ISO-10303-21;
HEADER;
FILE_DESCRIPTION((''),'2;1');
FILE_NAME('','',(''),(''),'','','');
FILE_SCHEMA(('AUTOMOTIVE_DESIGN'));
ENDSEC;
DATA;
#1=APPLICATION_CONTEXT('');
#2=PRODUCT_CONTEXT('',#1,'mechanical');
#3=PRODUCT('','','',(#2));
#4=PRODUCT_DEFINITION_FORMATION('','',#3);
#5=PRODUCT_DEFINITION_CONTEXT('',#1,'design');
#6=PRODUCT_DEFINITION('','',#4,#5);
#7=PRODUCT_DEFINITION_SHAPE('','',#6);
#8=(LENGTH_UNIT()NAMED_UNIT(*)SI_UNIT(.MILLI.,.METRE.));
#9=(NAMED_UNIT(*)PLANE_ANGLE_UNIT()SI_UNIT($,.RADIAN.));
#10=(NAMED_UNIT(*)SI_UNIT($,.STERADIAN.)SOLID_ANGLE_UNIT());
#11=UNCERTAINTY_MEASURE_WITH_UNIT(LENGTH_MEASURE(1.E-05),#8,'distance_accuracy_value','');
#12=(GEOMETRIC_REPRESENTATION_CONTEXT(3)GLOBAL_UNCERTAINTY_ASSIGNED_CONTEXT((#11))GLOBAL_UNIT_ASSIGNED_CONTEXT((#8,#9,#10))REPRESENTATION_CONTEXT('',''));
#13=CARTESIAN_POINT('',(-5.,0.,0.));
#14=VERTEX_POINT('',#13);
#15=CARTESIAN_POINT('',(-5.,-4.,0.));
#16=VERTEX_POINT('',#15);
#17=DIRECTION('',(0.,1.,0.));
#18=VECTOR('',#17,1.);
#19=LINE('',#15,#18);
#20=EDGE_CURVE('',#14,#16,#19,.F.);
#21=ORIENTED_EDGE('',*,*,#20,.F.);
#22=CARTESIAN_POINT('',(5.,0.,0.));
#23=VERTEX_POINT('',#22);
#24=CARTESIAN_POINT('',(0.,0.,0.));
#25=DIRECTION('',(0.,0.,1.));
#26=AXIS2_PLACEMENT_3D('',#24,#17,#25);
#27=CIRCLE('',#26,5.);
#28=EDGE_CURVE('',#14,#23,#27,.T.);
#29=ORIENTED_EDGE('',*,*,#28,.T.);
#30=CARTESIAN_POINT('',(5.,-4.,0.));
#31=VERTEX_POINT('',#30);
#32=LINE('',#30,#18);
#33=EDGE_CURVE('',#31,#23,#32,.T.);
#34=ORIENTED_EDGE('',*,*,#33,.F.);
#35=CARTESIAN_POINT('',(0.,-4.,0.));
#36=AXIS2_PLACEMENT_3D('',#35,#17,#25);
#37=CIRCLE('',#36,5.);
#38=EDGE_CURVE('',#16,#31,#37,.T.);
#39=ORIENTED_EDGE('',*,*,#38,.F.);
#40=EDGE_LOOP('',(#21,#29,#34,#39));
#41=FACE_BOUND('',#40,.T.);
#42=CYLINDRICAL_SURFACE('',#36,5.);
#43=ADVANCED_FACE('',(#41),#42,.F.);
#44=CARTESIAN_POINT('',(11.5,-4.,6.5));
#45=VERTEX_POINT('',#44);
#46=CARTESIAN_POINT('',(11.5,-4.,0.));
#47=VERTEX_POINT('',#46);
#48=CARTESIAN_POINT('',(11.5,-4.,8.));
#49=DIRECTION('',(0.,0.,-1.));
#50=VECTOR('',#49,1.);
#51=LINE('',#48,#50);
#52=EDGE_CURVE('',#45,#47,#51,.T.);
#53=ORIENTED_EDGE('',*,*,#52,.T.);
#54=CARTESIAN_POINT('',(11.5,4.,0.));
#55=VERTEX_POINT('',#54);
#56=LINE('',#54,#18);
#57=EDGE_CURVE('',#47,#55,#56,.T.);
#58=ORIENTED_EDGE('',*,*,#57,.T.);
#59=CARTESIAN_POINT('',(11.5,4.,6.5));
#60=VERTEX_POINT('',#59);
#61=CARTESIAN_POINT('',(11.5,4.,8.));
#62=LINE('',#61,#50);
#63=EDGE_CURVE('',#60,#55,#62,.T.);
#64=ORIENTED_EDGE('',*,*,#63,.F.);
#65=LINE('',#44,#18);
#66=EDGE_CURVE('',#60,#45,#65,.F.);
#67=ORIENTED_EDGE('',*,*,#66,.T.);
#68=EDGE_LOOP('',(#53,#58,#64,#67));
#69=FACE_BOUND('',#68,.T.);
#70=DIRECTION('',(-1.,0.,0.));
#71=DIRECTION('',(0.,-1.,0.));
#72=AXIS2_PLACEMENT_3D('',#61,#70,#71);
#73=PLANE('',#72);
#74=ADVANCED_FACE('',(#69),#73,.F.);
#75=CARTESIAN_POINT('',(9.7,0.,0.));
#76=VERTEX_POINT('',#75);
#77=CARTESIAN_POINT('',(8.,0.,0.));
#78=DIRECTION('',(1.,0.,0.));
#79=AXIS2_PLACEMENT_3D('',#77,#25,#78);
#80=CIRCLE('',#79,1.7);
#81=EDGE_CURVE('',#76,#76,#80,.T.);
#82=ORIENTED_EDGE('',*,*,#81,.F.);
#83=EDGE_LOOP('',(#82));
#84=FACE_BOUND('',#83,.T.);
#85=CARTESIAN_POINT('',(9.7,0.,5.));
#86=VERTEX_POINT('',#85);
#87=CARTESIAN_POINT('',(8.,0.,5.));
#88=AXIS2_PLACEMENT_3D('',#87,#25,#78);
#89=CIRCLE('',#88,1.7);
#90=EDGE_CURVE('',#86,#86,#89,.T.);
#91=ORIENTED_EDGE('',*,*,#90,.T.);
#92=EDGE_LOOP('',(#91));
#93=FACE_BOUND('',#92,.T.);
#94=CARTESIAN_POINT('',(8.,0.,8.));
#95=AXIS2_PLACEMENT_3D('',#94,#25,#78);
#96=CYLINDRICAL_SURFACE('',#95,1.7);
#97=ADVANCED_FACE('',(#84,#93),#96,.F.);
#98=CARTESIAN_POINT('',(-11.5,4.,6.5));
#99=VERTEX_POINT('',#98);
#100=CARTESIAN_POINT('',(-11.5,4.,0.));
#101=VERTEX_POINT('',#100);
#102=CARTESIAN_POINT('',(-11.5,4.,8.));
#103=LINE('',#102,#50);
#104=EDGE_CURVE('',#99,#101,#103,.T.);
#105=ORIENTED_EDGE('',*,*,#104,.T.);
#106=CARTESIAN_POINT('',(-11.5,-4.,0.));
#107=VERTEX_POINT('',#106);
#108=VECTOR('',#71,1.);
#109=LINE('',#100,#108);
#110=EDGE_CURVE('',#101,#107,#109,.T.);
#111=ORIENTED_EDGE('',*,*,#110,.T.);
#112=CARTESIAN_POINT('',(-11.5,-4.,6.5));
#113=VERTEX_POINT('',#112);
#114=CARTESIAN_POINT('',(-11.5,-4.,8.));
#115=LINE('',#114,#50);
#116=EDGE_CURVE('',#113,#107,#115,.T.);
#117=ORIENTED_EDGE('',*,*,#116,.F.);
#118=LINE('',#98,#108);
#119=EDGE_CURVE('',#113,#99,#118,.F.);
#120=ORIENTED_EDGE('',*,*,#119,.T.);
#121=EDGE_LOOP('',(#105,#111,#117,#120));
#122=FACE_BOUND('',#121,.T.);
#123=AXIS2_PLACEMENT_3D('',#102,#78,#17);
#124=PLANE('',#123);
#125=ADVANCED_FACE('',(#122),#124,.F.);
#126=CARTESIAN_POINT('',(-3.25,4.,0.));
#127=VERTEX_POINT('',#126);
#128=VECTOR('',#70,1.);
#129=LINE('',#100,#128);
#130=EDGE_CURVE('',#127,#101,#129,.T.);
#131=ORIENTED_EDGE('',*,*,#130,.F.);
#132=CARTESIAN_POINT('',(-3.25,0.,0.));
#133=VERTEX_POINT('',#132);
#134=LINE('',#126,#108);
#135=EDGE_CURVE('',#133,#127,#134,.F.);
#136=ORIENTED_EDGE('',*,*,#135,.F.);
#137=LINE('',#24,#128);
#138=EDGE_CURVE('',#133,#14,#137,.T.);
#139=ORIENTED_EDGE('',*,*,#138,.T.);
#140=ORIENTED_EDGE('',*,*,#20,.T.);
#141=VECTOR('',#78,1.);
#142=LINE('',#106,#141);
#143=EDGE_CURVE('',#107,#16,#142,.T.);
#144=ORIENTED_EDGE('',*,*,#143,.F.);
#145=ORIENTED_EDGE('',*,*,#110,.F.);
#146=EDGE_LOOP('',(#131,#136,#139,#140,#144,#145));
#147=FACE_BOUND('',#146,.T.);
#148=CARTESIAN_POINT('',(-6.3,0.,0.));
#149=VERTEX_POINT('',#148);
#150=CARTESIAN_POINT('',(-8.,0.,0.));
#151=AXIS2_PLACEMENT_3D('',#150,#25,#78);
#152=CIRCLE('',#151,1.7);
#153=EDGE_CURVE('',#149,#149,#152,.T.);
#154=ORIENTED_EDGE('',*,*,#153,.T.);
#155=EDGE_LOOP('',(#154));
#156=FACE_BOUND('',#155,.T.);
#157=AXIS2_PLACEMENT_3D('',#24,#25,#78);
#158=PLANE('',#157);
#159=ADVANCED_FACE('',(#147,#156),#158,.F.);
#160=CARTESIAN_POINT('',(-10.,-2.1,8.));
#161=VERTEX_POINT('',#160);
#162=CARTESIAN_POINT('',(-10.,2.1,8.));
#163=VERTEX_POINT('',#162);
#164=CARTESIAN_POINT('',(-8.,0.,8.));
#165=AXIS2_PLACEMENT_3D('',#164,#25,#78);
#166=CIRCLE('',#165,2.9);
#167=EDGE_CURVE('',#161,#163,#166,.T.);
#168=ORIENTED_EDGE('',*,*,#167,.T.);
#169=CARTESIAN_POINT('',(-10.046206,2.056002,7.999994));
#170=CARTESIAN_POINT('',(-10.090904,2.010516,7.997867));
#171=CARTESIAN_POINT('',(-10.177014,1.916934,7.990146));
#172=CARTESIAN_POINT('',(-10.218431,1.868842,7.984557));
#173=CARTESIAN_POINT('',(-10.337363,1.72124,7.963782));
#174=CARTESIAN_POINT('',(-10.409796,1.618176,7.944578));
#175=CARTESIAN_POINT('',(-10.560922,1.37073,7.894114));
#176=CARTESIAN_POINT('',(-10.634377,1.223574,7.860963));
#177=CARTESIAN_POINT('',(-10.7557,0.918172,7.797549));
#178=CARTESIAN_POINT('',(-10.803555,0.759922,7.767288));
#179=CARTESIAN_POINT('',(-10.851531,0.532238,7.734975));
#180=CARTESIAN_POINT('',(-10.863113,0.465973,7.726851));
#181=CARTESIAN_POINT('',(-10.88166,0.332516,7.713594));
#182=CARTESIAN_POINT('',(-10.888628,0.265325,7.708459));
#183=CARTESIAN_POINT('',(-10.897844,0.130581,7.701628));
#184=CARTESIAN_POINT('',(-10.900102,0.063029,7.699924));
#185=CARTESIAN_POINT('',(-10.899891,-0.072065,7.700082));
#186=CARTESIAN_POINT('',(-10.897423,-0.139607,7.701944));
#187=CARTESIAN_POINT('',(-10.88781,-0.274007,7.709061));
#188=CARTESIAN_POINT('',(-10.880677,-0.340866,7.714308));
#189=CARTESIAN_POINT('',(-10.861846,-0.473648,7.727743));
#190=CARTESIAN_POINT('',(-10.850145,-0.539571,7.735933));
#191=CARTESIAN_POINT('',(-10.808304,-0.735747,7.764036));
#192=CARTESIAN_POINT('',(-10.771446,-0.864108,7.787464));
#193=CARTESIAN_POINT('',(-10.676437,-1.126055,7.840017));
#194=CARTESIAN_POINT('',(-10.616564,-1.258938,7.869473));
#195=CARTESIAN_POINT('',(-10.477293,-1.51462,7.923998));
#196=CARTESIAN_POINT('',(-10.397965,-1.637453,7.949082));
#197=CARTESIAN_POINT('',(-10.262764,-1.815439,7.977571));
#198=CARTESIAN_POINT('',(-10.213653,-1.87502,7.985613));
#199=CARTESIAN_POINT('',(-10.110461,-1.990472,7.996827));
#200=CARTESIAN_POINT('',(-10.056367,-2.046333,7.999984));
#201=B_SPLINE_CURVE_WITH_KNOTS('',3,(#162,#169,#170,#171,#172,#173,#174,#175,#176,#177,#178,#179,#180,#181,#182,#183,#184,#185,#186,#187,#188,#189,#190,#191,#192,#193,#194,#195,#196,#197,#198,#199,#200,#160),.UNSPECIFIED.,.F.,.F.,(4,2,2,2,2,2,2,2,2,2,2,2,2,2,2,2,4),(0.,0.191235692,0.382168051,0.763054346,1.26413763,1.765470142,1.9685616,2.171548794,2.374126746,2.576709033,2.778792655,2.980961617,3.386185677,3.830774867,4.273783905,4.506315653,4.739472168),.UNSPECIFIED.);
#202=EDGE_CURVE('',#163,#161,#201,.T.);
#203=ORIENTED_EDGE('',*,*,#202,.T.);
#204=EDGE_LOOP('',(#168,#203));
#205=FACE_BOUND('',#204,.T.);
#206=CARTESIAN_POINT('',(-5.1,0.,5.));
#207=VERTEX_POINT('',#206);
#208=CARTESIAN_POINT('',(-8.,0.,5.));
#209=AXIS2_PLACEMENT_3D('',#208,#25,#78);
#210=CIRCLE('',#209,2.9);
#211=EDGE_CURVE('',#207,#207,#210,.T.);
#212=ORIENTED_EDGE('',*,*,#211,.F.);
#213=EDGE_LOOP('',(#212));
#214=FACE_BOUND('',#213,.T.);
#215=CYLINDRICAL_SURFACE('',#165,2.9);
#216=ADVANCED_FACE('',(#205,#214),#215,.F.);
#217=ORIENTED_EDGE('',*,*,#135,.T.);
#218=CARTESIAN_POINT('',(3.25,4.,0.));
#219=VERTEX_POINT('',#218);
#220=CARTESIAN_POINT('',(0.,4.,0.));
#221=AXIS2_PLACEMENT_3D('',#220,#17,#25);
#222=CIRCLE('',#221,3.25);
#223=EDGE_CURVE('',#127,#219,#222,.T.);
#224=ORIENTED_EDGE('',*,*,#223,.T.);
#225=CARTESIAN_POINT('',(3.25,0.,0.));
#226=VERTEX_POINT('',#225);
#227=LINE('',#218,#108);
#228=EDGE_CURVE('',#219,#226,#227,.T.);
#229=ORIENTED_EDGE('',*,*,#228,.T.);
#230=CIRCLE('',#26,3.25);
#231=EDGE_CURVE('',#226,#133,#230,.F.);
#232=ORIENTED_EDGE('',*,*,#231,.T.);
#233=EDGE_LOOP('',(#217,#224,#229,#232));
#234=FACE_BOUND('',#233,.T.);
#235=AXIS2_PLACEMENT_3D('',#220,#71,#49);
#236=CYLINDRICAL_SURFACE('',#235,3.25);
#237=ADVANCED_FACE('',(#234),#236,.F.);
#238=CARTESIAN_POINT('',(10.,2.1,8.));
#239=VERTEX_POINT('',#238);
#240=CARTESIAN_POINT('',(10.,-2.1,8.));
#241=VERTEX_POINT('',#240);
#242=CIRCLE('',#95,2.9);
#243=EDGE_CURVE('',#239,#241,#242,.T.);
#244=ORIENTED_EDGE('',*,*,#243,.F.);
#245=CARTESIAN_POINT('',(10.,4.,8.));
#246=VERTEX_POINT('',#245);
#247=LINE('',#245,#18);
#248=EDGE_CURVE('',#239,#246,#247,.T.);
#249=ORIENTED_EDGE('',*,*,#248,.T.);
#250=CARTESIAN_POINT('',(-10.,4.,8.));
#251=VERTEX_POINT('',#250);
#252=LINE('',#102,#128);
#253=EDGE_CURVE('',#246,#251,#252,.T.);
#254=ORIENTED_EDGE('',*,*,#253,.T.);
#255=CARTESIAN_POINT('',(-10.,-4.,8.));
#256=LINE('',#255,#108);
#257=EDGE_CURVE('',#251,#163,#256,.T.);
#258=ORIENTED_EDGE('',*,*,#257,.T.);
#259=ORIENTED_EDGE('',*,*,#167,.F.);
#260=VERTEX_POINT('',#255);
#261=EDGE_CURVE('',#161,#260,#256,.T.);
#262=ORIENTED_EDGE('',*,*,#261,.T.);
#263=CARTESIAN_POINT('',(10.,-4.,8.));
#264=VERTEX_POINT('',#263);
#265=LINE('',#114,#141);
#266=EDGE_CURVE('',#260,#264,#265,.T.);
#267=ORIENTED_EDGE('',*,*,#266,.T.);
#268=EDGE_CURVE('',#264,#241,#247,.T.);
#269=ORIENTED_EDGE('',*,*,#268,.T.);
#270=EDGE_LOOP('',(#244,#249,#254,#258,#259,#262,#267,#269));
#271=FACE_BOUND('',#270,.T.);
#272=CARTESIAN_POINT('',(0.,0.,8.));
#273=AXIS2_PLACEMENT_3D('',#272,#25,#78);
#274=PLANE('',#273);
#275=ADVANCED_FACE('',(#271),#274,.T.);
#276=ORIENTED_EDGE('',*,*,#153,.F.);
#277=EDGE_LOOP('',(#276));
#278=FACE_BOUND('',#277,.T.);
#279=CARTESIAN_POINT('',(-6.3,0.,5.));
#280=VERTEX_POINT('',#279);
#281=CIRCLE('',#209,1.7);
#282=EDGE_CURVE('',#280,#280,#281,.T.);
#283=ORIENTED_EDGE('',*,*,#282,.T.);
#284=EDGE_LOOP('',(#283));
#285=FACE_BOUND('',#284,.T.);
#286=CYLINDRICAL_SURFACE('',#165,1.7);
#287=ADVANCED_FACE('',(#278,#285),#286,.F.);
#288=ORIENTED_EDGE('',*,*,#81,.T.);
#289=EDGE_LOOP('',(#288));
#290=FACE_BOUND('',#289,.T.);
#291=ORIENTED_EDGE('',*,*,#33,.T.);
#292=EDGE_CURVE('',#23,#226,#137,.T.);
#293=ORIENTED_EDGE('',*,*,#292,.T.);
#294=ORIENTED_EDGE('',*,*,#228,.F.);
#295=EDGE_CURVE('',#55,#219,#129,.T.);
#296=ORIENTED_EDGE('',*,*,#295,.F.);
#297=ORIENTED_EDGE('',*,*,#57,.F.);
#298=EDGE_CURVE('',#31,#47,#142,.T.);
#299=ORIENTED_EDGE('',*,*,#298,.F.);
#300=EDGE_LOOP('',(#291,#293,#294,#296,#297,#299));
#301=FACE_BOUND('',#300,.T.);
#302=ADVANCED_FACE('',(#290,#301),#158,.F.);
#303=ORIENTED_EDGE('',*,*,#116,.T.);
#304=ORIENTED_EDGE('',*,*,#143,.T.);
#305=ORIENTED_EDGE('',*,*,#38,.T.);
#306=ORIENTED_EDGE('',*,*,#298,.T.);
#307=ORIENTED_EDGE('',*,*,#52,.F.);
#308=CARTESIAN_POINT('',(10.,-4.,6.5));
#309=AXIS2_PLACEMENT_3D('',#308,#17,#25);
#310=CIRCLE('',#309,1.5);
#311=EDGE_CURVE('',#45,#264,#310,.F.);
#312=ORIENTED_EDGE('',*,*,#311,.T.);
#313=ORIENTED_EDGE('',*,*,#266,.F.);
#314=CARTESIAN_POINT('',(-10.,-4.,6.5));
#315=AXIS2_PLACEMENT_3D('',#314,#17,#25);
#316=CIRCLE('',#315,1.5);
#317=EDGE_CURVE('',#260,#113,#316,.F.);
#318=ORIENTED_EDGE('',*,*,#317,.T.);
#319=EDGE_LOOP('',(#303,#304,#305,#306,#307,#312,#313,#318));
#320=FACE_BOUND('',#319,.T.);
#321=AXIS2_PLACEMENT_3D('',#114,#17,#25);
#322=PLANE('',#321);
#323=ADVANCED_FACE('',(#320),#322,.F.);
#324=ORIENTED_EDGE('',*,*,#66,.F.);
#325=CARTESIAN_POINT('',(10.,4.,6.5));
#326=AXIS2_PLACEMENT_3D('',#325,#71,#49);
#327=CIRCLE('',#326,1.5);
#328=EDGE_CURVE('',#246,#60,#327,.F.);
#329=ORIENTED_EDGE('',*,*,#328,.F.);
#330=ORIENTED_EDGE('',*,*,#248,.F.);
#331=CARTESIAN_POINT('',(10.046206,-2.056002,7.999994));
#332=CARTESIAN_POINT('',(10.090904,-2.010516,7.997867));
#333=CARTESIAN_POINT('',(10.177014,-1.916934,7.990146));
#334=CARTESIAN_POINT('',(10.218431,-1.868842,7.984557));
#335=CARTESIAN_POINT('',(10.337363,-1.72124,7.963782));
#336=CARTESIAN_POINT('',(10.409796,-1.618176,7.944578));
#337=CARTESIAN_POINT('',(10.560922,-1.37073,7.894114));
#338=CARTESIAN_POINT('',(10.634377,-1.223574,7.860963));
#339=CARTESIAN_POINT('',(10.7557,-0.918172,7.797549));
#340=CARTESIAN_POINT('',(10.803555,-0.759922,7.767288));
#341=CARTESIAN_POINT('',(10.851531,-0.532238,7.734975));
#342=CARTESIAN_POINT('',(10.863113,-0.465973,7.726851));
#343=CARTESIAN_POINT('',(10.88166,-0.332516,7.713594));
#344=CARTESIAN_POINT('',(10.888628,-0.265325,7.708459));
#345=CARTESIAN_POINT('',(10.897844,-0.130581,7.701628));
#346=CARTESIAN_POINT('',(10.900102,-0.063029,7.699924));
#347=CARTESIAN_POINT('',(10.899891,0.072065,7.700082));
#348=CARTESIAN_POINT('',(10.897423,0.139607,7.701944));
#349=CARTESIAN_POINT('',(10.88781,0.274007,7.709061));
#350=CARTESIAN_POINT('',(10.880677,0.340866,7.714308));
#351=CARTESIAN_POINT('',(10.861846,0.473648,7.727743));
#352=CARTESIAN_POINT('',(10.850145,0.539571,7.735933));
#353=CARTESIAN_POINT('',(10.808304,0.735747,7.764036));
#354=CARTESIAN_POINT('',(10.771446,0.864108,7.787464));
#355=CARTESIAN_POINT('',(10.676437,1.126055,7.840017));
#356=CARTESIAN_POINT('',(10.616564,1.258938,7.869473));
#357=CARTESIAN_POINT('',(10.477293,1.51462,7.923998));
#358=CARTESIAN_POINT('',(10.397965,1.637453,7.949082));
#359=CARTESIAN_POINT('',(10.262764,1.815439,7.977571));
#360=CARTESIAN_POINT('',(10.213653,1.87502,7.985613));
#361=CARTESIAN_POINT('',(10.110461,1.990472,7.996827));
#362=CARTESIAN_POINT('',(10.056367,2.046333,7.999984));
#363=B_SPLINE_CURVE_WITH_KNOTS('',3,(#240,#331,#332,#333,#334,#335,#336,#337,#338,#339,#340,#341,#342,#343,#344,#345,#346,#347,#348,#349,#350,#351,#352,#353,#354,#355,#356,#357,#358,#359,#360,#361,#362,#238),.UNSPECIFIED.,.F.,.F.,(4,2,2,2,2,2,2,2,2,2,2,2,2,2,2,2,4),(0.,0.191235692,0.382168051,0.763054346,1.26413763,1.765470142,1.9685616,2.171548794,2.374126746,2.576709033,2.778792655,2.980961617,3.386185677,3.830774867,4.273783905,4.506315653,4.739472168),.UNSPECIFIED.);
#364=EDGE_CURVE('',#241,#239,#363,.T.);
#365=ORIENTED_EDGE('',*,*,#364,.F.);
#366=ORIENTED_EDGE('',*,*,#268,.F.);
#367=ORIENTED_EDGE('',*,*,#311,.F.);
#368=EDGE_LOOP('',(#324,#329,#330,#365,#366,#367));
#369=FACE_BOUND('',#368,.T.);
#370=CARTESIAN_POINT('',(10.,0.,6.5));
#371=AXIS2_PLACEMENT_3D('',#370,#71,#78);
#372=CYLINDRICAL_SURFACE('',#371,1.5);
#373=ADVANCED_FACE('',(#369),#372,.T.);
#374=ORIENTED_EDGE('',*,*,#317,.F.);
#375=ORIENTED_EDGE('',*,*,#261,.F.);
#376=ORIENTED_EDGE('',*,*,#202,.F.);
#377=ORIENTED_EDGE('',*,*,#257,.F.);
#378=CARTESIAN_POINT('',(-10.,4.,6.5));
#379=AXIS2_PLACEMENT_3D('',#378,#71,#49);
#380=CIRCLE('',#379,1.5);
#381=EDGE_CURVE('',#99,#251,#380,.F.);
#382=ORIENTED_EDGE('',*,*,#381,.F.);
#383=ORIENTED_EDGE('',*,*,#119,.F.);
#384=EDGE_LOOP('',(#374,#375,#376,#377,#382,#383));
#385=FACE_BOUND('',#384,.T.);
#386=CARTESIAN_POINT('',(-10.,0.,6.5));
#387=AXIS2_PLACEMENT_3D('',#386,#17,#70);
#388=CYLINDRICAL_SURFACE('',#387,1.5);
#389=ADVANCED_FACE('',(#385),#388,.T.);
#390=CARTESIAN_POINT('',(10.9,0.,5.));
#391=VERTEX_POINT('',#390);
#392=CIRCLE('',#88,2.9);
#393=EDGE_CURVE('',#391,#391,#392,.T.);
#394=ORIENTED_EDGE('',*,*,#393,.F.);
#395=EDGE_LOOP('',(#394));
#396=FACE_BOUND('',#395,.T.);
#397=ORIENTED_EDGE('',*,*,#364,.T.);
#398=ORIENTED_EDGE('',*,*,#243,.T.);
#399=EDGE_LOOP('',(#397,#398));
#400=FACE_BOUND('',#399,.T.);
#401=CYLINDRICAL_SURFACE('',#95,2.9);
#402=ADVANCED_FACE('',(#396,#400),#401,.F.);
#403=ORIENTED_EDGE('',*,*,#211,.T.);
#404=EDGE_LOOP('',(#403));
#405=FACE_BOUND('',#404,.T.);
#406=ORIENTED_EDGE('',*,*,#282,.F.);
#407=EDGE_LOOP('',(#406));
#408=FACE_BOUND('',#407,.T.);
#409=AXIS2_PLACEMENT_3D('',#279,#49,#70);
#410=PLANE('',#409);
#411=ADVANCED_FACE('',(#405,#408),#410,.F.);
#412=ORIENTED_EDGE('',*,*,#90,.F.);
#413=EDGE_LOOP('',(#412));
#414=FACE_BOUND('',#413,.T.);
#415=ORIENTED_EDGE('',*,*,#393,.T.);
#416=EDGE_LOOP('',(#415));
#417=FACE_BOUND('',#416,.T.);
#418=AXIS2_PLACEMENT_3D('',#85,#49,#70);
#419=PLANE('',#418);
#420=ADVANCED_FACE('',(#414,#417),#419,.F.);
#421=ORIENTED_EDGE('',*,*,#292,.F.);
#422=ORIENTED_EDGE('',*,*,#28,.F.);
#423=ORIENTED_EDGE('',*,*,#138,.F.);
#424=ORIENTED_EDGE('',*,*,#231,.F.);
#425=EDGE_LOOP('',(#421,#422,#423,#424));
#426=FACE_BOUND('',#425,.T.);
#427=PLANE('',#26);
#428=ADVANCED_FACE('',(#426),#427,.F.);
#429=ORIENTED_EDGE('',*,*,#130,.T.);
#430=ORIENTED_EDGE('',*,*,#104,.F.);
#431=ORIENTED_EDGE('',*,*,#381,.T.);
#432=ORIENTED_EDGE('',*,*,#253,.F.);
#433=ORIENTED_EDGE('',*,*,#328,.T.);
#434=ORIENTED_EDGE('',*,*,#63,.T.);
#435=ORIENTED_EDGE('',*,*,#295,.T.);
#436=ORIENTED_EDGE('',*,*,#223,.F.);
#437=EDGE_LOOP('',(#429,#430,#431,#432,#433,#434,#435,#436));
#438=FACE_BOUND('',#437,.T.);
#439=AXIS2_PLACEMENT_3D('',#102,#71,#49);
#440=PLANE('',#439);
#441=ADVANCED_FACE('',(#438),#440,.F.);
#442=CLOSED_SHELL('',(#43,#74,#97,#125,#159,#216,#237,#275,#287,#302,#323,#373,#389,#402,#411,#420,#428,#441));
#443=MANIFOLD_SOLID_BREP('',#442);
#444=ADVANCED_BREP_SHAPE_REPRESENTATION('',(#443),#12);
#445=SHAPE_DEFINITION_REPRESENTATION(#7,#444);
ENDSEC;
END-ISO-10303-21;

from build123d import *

# Parameters (mm, degrees)
SKETCH1_W                      = 23
SKETCH1_H                      = 8
BOSS_EXTRUDE1_DEPTH            = 8
SKETCH2_R                      = 5
CUT_EXTRUDE1_DEPTH             = 15.568802284
CBORE_FOR_M3_SHCS1_D           = 3.4
CBORE_FOR_M3_SHCS1_CBORE_D     = 5.8
CBORE_FOR_M3_SHCS1_CBORE_DEPTH = 3
SKETCH8_R                      = 3.25
CUT_EXTRUDE2_DEPTH             = 15.568802284
FILLET1_R                      = 1.5


with BuildPart() as part:
    # Sketch1 → Boss-Extrude1 (new body)
    with BuildSketch(Plane.XY):
        Rectangle(SKETCH1_W, SKETCH1_H)
    extrude(amount=BOSS_EXTRUDE1_DEPTH)

    # Sketch2 → Cut-Extrude1 (cut, through all)
    with BuildSketch(Plane(origin=(0, 0, 0), x_dir=(1, 0, 0), z_dir=(0, 1, 0))):
        Circle(SKETCH2_R)
    extrude(amount=-CUT_EXTRUDE1_DEPTH, mode=Mode.SUBTRACT)

    # CBORE for M3 SHCS1 (through all)
    with Locations(Plane.XY.offset(8)):
        with Locations((-8, 0), (8, 0)):
            CounterBoreHole(CBORE_FOR_M3_SHCS1_D / 2, CBORE_FOR_M3_SHCS1_CBORE_D / 2, CBORE_FOR_M3_SHCS1_CBORE_DEPTH)

    # Sketch8 → Cut-Extrude2 (cut, through all)
    with BuildSketch(Plane(origin=(0, 0, 0), x_dir=(1, 0, 0), z_dir=(0, 1, 0))):
        Circle(SKETCH8_R)
    extrude(amount=CUT_EXTRUDE2_DEPTH, mode=Mode.SUBTRACT)

    # Fillet1
    # the kernel refuses this fillet: 1.5 mm, written as the material it takes off along each edge
    with BuildSketch(Plane(origin=(-11.5, -7.75, 8), x_dir=(1, 0, 0), z_dir=(0, 1, 0))) as fillet1_piece_1:
        with BuildLine():
            CenterArc((FILLET1_R, FILLET1_R), FILLET1_R, 180, 90)
            Line((0, FILLET1_R), (0, 0))
            Line((0, 0), (FILLET1_R, 0))
        make_face()
    extrude(amount=15.5, mode=Mode.SUBTRACT)
    with BuildSketch(Plane(origin=(11.5, 7.75, 8), x_dir=(0, 0, -1), z_dir=(0, -1, 0))) as fillet1_piece_2:
        with BuildLine():
            CenterArc((FILLET1_R, -FILLET1_R), FILLET1_R, 90, 90)
            Line((0, -FILLET1_R), (0, 0))
            Line((0, 0), (FILLET1_R, 0))
        make_face()
    extrude(amount=15.5, mode=Mode.SUBTRACT)


solid = part.part
